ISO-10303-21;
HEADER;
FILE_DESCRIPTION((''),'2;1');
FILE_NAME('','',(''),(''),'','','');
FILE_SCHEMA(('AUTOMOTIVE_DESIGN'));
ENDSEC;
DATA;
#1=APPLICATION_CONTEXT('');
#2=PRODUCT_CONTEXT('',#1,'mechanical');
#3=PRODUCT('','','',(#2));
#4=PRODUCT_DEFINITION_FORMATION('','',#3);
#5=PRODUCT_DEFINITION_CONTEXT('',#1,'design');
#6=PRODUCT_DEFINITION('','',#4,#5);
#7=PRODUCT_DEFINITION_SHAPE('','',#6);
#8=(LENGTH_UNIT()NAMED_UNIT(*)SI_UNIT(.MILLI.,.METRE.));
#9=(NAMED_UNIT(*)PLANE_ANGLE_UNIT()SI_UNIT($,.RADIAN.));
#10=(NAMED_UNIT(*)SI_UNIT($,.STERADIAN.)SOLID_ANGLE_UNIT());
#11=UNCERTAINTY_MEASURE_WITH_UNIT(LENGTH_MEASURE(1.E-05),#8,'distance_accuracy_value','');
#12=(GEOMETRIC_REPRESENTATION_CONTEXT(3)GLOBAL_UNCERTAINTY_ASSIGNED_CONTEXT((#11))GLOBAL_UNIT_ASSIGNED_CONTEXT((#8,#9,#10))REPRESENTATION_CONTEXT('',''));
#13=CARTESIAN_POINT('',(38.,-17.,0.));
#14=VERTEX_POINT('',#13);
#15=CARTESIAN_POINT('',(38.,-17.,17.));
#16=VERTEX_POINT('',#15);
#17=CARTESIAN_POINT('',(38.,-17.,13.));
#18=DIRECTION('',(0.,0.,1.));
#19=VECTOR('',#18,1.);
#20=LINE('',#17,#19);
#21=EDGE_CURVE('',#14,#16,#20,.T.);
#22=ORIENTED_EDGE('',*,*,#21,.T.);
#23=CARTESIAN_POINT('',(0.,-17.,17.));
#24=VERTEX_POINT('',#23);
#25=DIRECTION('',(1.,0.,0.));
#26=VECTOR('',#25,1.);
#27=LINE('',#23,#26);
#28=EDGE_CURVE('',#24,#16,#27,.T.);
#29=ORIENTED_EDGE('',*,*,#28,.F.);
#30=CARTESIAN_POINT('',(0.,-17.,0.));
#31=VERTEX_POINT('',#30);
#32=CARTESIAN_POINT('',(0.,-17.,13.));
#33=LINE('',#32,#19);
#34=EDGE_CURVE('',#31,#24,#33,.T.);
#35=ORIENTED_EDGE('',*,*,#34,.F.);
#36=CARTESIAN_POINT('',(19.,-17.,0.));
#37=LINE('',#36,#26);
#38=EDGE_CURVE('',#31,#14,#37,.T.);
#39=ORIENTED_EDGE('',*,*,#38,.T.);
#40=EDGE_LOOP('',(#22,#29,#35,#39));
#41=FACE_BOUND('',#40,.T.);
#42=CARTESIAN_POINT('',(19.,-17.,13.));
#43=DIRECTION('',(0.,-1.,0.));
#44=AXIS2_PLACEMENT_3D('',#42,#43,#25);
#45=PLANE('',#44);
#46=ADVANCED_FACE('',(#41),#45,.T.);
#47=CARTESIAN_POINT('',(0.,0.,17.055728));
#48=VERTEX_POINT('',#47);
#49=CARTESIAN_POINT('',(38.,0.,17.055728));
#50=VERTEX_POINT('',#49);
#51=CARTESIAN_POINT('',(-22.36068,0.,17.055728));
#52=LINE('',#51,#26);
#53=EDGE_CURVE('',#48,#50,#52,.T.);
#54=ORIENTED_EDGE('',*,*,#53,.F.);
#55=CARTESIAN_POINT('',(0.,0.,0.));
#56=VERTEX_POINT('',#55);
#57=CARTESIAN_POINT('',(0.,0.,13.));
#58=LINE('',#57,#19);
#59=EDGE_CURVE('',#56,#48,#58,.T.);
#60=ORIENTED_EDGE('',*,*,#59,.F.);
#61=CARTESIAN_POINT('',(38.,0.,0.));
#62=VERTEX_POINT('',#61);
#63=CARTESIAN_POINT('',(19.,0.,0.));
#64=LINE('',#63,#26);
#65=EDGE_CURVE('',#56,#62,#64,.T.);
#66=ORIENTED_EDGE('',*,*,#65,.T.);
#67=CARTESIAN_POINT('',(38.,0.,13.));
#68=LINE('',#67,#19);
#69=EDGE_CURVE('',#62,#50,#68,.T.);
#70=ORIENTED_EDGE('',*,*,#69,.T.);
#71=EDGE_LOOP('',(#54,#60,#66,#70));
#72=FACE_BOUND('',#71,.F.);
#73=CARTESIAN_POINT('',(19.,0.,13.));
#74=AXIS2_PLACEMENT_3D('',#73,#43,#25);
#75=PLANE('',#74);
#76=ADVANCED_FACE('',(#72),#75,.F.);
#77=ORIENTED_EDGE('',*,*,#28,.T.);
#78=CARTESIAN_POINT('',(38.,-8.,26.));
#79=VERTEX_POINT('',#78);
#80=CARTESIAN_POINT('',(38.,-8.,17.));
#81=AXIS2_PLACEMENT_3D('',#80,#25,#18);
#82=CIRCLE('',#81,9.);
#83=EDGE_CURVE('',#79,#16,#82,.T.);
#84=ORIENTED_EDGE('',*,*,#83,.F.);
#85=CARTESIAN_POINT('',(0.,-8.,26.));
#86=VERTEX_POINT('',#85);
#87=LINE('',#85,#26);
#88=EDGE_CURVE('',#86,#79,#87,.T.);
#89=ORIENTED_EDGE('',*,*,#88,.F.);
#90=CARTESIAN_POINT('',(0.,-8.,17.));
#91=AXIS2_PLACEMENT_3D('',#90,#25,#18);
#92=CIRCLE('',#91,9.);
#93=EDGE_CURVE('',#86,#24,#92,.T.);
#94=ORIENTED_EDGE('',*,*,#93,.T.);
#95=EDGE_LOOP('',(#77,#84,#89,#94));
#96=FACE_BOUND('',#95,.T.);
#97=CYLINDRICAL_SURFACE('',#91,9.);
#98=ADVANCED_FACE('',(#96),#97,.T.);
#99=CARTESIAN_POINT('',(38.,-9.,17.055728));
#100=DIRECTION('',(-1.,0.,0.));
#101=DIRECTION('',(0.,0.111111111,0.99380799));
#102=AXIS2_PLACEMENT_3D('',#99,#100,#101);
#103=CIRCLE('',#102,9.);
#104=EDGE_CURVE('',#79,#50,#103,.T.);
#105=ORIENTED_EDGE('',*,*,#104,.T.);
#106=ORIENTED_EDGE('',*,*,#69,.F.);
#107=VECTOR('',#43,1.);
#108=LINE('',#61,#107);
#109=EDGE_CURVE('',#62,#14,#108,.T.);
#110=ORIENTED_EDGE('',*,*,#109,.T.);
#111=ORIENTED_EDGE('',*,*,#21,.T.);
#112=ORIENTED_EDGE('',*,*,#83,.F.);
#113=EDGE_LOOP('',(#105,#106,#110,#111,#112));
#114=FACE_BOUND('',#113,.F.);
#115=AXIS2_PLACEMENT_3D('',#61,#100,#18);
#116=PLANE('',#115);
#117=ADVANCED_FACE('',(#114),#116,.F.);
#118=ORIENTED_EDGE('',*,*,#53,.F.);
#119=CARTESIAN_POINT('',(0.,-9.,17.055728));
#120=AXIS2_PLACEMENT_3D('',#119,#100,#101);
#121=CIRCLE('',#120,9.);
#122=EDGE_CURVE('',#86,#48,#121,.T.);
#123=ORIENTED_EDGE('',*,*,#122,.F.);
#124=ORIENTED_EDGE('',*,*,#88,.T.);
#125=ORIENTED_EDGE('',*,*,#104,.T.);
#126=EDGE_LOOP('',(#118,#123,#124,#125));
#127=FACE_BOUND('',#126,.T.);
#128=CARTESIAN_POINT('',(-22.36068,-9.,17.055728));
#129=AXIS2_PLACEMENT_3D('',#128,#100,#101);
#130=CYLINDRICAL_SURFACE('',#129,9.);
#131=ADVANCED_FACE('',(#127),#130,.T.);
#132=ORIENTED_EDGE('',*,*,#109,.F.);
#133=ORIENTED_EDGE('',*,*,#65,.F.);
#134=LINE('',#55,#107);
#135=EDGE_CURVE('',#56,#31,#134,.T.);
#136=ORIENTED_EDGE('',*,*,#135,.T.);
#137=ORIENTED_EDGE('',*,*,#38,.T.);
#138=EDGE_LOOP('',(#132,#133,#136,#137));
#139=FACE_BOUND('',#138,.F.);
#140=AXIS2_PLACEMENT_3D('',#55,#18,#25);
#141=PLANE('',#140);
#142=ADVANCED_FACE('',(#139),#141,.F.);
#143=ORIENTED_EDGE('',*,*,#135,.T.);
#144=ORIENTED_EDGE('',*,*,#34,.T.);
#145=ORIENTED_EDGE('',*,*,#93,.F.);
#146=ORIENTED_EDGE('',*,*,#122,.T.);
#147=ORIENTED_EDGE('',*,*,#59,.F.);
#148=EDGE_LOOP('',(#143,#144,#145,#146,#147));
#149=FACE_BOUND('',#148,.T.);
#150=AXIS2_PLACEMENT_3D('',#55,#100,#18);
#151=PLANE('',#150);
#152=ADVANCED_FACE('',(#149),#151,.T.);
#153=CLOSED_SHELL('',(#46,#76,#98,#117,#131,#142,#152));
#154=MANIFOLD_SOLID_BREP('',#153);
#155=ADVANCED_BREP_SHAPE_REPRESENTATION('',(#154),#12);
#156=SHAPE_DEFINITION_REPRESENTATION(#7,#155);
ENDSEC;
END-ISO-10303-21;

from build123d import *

# Parameters (mm, degrees)
F0_W        = 38
F0_H        = 26
F1_DEPTH    = 17
F2_R        = 9
F3_T1_DEPTH = 82.72135955


# Not quite as in the source:
# - a fillet or chamfer that OpenCascade refuses, or shapes differently, is made with other operations: its cross-section is extruded or revolved along the edge and cut away or added


with BuildPart() as f1:
    # F0 (on Front) → F1 (new body)
    with BuildSketch(Plane.XZ):
        with Locations((19, 13)):
            Rectangle(F0_W, F0_H)
    extrude(amount=F1_DEPTH)

    # F2
    f2_edges = [f1.edges().sort_by_distance(p)[0] for p in [
        (19, -17, 26),
    ]]
    fillet(f2_edges, radius=F2_R)

    # F3: fillet of radius 9 on 1 edges, made by hand

    # F3_s2 → F3_t1 (cut)
    with BuildSketch(Plane.YZ.offset(-22.360679775)):
        with BuildLine():
            ThreePointArc((-8, 26), (-2.2917960675, 23.05572809), (0, 17.05572809))
            Line((0, 17.05572809), (0, 26))
            Line((0, 26), (-8, 26))
        make_face()
    extrude(amount=F3_T1_DEPTH, mode=Mode.SUBTRACT)


solid = f1.part
